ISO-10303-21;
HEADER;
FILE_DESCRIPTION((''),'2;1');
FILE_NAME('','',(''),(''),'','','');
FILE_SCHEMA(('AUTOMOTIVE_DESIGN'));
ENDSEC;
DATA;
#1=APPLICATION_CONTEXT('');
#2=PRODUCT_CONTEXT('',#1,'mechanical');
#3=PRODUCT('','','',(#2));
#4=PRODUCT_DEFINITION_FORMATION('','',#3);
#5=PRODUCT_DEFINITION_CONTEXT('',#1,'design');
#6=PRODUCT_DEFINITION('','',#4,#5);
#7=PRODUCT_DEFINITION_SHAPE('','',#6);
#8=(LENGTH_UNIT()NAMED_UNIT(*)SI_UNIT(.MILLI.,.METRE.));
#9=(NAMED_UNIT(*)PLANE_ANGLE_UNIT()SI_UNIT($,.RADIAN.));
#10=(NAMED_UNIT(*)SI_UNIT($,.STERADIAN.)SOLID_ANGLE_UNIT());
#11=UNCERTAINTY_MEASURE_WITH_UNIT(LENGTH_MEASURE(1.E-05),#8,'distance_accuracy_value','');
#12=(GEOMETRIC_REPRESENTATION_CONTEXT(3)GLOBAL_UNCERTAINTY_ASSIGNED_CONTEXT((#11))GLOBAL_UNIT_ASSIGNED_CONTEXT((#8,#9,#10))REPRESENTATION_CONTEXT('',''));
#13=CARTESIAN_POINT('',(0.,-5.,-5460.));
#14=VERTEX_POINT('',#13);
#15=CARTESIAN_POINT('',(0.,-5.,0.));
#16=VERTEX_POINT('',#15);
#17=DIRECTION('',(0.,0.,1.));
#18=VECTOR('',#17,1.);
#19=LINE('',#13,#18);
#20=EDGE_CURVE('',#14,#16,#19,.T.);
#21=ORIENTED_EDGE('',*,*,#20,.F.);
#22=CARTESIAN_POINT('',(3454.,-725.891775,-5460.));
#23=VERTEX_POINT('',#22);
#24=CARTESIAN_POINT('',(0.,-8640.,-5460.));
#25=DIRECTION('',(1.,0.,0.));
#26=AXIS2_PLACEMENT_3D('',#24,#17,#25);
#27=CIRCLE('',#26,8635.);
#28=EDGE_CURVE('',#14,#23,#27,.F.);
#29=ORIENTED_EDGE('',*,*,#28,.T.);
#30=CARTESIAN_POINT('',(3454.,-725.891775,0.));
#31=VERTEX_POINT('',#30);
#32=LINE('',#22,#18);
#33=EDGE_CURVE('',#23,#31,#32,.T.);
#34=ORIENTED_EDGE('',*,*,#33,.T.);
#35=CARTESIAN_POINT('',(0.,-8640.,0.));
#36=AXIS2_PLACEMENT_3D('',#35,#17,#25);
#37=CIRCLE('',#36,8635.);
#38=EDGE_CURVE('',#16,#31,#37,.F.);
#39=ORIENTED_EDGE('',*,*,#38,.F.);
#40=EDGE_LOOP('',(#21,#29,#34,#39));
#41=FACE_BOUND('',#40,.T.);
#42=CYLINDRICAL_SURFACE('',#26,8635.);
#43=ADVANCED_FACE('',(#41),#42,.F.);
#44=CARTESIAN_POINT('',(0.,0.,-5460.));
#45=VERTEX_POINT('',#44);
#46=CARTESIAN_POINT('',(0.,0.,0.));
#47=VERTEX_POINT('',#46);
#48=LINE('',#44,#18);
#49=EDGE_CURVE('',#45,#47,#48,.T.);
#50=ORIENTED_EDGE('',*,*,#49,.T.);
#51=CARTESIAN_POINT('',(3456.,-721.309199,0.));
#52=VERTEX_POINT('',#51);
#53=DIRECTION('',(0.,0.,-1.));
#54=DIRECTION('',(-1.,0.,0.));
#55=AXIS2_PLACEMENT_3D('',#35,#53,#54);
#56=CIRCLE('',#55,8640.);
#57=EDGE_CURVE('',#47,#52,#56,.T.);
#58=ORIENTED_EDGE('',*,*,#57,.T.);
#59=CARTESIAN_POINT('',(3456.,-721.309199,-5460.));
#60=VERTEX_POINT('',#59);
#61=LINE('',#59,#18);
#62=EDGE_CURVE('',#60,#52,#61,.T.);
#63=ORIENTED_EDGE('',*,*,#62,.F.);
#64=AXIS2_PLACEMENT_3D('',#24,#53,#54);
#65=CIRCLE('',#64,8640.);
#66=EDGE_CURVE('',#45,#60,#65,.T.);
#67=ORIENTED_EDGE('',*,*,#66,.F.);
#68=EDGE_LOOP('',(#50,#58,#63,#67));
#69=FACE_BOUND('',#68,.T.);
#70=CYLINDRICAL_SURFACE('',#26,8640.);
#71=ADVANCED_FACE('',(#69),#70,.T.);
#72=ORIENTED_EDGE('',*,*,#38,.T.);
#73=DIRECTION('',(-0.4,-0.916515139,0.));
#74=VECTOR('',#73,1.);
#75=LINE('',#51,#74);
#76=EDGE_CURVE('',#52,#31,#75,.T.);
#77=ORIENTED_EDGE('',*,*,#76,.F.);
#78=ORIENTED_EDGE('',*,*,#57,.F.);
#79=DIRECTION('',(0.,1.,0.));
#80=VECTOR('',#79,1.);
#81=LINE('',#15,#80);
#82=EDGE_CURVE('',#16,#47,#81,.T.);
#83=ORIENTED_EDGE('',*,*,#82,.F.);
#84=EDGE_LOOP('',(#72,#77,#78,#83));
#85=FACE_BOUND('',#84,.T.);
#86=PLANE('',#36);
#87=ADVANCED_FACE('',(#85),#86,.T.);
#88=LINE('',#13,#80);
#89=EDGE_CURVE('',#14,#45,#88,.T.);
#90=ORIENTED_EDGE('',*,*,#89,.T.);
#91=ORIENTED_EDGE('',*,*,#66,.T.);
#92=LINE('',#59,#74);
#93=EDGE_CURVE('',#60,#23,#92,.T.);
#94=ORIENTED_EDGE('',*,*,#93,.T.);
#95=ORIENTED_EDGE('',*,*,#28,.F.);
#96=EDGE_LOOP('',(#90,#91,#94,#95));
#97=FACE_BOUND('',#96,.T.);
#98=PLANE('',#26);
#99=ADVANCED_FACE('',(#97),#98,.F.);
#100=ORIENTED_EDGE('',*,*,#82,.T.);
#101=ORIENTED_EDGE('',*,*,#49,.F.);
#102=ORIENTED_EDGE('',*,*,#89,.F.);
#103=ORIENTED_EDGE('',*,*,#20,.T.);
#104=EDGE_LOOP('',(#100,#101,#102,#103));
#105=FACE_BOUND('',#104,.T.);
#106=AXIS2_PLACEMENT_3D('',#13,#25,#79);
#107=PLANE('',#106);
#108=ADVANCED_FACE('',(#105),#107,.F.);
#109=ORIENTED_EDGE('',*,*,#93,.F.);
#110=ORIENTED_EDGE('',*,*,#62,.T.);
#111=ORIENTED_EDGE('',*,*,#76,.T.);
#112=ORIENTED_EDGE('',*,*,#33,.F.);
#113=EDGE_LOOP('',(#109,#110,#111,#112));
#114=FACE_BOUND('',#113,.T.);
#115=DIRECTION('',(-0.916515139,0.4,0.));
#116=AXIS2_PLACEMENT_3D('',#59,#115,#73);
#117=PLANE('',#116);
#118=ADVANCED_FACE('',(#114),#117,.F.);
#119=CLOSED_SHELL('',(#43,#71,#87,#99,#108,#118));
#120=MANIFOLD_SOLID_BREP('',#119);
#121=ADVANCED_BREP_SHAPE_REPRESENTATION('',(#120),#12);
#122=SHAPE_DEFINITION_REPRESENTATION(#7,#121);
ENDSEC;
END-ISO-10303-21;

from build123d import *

# Parameters (mm, degrees)
ODGI_CIE_BAZOWE2_DEPTH = 5460


# Sheet-metal steps are written as plain solids
with BuildPart() as part:
    # Szkic9 → Odgięcie bazowe2 (new body)
    with BuildSketch(Plane.XY):
        with BuildLine():
            ThreePointArc((0, 0), (1765.235321475, -182.249456279), (3456, -721.309199116))
            Line((3456, -721.309199116), (3454, -725.891774811))
            ThreePointArc((3454, -725.891774811), (1764.213773256, -187.143987843), (0, -5))
            Line((0, -5), (0, 0))
        make_face()
    extrude(amount=-ODGI_CIE_BAZOWE2_DEPTH)


solid = part.part
